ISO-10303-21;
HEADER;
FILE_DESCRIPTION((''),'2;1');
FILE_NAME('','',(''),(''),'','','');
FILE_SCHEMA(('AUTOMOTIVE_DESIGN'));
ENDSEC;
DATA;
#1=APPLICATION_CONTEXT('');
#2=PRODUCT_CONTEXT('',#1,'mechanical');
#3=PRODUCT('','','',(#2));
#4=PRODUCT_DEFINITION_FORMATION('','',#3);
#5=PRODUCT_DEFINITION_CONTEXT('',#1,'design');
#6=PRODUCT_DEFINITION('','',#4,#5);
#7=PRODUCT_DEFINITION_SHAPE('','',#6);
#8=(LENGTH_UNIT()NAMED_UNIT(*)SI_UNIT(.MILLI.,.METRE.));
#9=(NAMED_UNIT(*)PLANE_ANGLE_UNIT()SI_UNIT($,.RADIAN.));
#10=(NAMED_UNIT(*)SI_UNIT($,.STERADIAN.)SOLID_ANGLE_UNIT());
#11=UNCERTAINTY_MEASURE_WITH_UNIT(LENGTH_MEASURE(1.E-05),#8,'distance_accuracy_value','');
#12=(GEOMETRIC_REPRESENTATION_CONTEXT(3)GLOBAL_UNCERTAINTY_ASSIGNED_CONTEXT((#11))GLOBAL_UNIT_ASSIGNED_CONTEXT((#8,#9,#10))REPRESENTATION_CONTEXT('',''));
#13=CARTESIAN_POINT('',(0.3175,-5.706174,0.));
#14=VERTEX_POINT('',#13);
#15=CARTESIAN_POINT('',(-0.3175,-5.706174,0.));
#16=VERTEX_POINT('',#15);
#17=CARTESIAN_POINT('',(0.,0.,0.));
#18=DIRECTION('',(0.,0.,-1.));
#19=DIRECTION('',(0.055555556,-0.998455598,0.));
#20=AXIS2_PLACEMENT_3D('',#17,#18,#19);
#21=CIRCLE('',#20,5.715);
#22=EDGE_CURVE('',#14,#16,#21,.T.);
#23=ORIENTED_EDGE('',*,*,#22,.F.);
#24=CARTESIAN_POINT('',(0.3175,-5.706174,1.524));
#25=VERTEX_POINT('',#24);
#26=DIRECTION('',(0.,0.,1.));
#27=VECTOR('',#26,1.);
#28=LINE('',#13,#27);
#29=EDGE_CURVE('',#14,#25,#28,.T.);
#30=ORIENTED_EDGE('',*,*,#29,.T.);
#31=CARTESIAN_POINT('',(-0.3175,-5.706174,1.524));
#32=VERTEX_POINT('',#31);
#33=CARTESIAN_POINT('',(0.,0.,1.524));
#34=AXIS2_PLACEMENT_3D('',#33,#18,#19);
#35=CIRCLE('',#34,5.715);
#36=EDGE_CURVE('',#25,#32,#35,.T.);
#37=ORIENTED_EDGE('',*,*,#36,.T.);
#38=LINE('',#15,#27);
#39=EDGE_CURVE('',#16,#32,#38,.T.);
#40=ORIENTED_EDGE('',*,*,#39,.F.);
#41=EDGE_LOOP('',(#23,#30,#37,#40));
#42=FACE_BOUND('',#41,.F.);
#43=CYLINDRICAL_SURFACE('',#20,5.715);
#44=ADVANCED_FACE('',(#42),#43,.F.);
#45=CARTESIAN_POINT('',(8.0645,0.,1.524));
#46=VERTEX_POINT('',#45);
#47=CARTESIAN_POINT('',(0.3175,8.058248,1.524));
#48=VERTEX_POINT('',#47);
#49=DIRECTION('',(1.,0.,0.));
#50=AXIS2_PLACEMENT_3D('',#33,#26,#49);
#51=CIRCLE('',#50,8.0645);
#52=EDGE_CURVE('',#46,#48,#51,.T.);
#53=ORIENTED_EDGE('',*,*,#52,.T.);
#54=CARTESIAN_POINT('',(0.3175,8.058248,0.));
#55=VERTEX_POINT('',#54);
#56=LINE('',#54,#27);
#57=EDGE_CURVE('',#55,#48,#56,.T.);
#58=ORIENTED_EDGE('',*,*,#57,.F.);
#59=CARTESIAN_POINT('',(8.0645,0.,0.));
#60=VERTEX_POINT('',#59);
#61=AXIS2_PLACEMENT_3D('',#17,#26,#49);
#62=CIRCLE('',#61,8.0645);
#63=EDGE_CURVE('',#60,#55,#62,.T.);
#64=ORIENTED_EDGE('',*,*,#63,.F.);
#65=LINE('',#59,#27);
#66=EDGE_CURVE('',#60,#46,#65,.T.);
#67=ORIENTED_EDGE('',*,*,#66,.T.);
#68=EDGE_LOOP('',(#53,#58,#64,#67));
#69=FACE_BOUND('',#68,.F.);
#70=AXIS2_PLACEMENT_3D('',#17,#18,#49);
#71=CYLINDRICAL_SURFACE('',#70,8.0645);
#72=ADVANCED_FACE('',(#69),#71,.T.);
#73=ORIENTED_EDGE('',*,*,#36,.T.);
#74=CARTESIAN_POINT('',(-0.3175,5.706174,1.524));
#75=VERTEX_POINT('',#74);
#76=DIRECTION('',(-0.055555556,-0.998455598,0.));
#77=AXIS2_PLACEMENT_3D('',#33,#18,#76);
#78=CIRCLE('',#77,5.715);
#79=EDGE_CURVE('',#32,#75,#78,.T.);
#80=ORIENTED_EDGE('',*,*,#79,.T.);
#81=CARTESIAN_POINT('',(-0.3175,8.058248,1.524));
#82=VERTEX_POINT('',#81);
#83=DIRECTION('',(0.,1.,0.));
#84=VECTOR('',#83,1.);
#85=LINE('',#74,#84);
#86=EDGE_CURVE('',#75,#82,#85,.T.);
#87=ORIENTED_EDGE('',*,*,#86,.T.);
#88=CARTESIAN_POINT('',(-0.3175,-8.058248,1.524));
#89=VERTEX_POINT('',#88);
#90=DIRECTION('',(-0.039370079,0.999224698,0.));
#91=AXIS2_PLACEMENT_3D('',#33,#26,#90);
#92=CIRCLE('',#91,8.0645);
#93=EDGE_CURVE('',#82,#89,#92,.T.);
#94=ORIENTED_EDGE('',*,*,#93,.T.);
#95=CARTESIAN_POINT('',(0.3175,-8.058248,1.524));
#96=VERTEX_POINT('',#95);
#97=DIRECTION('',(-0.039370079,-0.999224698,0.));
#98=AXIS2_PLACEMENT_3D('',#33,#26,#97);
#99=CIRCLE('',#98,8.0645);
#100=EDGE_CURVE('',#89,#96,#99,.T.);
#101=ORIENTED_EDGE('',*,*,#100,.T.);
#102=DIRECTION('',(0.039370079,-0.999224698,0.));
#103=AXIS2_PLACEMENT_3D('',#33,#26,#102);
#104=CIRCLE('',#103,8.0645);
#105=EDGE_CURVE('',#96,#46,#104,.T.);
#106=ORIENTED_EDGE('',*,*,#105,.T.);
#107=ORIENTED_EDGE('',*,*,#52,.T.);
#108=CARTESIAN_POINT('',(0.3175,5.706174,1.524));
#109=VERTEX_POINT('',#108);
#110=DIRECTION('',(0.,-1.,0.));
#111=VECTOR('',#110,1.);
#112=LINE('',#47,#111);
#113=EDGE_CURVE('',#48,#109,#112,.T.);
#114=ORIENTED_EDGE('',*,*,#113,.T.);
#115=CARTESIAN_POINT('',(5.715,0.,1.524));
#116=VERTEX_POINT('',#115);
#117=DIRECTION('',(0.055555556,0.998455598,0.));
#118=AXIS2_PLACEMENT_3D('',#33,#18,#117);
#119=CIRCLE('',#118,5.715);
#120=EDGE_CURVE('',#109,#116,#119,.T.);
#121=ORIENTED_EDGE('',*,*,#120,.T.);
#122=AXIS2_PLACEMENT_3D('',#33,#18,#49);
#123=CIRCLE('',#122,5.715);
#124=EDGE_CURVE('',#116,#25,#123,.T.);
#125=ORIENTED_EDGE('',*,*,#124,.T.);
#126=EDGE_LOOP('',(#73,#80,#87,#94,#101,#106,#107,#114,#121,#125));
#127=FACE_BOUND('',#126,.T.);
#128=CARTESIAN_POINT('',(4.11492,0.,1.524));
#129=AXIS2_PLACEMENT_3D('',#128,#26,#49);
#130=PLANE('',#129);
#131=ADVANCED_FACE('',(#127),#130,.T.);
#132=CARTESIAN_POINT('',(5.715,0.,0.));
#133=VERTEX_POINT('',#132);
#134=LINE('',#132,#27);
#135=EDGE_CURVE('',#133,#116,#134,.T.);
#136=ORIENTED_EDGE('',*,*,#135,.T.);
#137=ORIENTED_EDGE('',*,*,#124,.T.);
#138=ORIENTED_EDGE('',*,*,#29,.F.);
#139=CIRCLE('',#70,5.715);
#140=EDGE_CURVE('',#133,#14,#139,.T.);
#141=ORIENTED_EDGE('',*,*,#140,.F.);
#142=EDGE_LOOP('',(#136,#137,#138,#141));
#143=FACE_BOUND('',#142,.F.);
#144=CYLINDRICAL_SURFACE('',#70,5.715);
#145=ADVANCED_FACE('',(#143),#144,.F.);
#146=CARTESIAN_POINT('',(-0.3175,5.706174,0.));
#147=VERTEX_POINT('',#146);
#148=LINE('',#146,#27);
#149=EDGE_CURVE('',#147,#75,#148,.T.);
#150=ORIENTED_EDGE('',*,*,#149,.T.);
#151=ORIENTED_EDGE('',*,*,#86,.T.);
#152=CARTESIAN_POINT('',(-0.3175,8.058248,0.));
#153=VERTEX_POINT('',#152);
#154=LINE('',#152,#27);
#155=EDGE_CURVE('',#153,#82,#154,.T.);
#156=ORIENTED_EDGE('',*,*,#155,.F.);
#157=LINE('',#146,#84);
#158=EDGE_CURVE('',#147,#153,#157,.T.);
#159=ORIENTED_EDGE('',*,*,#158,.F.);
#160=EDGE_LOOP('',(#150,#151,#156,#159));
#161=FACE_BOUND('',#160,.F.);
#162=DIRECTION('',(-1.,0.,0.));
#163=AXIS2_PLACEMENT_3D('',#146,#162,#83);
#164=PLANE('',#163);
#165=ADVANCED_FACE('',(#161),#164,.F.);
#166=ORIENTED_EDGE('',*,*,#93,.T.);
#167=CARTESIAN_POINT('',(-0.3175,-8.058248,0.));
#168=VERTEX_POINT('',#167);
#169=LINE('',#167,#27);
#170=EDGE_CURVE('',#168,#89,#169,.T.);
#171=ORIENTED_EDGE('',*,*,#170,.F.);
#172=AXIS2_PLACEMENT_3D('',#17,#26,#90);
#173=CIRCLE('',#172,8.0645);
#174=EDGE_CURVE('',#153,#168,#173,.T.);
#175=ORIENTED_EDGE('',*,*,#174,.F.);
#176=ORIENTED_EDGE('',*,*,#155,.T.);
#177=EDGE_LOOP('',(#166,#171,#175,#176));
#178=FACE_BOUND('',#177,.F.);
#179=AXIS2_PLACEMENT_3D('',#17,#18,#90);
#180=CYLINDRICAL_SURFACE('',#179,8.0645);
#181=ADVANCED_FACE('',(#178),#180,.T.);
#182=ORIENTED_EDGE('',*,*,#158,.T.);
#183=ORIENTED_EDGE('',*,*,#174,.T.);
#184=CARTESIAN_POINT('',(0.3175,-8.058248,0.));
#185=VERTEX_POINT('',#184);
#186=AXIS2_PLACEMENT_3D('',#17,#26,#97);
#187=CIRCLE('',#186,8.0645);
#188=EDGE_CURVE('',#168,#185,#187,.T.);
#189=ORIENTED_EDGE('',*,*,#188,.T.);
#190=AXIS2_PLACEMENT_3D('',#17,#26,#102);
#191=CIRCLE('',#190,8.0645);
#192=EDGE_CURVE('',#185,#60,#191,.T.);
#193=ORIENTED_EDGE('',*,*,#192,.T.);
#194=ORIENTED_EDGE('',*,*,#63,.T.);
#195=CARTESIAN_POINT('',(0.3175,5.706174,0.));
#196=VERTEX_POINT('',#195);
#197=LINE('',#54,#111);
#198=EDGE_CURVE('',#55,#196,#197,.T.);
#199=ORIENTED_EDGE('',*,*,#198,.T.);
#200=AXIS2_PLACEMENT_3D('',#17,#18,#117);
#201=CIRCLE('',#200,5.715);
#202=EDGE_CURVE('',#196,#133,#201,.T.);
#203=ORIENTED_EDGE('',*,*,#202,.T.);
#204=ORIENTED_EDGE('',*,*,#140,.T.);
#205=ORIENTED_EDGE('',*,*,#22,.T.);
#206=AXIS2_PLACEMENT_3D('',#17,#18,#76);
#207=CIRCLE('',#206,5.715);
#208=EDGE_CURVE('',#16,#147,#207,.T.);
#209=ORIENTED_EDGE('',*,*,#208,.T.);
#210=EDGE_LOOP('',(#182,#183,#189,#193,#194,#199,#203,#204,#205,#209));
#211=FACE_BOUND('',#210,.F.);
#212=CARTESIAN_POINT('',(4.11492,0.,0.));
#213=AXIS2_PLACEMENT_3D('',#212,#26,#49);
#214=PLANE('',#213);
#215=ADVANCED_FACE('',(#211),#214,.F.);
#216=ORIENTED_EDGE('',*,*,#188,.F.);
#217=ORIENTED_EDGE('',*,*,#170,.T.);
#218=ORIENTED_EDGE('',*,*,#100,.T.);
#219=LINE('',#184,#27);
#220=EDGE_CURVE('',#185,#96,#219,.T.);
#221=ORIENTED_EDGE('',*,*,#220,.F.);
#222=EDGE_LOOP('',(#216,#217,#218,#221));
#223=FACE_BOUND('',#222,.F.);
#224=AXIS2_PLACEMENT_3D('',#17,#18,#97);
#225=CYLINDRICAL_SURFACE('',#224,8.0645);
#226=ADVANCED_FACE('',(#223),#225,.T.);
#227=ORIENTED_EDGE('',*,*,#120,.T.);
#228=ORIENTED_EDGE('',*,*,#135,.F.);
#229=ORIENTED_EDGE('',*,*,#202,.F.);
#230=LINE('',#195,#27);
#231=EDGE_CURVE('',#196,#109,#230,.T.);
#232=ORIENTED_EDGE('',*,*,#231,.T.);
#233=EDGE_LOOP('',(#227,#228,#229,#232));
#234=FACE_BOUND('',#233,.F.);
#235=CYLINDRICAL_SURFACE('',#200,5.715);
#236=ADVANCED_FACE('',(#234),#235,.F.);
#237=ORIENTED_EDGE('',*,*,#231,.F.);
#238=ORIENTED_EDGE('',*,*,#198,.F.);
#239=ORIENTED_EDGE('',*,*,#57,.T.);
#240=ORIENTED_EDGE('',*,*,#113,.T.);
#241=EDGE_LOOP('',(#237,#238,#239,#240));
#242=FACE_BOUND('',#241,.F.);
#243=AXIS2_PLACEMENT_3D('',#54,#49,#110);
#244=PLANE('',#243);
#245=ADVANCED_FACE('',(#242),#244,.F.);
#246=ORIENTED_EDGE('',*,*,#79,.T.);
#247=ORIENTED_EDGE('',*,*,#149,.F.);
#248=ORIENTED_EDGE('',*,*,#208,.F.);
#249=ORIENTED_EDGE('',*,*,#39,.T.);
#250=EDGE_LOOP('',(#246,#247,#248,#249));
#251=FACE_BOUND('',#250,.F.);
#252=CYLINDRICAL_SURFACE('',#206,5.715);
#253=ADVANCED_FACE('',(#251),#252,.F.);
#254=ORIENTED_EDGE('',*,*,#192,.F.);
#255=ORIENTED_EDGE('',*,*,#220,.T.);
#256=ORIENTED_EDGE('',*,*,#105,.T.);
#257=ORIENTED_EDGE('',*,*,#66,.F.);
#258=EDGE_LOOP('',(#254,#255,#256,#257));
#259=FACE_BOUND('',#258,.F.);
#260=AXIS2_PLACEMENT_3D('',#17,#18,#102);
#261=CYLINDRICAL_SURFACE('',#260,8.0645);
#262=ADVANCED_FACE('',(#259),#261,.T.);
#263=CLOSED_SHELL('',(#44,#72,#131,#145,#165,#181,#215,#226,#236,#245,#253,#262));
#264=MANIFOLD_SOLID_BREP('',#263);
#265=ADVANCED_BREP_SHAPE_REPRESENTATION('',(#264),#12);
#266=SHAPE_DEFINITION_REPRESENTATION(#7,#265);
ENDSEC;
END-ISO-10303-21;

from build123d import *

# Parameters (mm, degrees)
F1_DEPTH = 1.524


# Not quite as in the source:
# - a feature names something its author has since deleted; it is built from what else it names


with BuildPart() as f1:
    # F0 (on Top) → F1 (new body)
    with BuildSketch(Plane.XY):
        with BuildLine():
            ThreePointArc((0.3175, 5.7061737399), (4.1518512437, 3.9272581084), (5.715, 0))
            ThreePointArc((5.715, 0), (4.1518512437, -3.9272581084), (0.3175, -5.7061737399))
            Line((0.3175, -5.7061737399), (0.3175, -8.0582475762))
            ThreePointArc((0.3175, -8.0582475762), (5.8136322123, -5.5890822816), (8.0645, 0))
            ThreePointArc((8.0645, 0), (5.8136322123, 5.5890822816), (0.3175, 8.0582475762))
            Line((0.3175, 8.0582475762), (0.3175, 5.7061737399))
        make_face()
        with BuildLine():
            Line((0.3175, -8.0582475762), (0.3175, -5.7061737399))
            ThreePointArc((0.3175, -5.7061737399), (0, -5.715), (-0.3175, -5.7061737399))
            Line((-0.3175, -5.7061737399), (-0.3175, -8.0582475762))
            ThreePointArc((-0.3175, -8.0582475762), (0, -8.0645), (0.3175, -8.0582475762))
        make_face()
        with BuildLine():
            ThreePointArc((-0.3175, -5.7061737399), (-5.715, 0), (-0.3175, 5.7061737399))
            Line((-0.3175, 5.7061737399), (-0.3175, 8.0582475762))
            ThreePointArc((-0.3175, 8.0582475762), (-8.0645, 0), (-0.3175, -8.0582475762))
            Line((-0.3175, -8.0582475762), (-0.3175, -5.7061737399))
        make_face()
    extrude(amount=F1_DEPTH)


solid = f1.part
